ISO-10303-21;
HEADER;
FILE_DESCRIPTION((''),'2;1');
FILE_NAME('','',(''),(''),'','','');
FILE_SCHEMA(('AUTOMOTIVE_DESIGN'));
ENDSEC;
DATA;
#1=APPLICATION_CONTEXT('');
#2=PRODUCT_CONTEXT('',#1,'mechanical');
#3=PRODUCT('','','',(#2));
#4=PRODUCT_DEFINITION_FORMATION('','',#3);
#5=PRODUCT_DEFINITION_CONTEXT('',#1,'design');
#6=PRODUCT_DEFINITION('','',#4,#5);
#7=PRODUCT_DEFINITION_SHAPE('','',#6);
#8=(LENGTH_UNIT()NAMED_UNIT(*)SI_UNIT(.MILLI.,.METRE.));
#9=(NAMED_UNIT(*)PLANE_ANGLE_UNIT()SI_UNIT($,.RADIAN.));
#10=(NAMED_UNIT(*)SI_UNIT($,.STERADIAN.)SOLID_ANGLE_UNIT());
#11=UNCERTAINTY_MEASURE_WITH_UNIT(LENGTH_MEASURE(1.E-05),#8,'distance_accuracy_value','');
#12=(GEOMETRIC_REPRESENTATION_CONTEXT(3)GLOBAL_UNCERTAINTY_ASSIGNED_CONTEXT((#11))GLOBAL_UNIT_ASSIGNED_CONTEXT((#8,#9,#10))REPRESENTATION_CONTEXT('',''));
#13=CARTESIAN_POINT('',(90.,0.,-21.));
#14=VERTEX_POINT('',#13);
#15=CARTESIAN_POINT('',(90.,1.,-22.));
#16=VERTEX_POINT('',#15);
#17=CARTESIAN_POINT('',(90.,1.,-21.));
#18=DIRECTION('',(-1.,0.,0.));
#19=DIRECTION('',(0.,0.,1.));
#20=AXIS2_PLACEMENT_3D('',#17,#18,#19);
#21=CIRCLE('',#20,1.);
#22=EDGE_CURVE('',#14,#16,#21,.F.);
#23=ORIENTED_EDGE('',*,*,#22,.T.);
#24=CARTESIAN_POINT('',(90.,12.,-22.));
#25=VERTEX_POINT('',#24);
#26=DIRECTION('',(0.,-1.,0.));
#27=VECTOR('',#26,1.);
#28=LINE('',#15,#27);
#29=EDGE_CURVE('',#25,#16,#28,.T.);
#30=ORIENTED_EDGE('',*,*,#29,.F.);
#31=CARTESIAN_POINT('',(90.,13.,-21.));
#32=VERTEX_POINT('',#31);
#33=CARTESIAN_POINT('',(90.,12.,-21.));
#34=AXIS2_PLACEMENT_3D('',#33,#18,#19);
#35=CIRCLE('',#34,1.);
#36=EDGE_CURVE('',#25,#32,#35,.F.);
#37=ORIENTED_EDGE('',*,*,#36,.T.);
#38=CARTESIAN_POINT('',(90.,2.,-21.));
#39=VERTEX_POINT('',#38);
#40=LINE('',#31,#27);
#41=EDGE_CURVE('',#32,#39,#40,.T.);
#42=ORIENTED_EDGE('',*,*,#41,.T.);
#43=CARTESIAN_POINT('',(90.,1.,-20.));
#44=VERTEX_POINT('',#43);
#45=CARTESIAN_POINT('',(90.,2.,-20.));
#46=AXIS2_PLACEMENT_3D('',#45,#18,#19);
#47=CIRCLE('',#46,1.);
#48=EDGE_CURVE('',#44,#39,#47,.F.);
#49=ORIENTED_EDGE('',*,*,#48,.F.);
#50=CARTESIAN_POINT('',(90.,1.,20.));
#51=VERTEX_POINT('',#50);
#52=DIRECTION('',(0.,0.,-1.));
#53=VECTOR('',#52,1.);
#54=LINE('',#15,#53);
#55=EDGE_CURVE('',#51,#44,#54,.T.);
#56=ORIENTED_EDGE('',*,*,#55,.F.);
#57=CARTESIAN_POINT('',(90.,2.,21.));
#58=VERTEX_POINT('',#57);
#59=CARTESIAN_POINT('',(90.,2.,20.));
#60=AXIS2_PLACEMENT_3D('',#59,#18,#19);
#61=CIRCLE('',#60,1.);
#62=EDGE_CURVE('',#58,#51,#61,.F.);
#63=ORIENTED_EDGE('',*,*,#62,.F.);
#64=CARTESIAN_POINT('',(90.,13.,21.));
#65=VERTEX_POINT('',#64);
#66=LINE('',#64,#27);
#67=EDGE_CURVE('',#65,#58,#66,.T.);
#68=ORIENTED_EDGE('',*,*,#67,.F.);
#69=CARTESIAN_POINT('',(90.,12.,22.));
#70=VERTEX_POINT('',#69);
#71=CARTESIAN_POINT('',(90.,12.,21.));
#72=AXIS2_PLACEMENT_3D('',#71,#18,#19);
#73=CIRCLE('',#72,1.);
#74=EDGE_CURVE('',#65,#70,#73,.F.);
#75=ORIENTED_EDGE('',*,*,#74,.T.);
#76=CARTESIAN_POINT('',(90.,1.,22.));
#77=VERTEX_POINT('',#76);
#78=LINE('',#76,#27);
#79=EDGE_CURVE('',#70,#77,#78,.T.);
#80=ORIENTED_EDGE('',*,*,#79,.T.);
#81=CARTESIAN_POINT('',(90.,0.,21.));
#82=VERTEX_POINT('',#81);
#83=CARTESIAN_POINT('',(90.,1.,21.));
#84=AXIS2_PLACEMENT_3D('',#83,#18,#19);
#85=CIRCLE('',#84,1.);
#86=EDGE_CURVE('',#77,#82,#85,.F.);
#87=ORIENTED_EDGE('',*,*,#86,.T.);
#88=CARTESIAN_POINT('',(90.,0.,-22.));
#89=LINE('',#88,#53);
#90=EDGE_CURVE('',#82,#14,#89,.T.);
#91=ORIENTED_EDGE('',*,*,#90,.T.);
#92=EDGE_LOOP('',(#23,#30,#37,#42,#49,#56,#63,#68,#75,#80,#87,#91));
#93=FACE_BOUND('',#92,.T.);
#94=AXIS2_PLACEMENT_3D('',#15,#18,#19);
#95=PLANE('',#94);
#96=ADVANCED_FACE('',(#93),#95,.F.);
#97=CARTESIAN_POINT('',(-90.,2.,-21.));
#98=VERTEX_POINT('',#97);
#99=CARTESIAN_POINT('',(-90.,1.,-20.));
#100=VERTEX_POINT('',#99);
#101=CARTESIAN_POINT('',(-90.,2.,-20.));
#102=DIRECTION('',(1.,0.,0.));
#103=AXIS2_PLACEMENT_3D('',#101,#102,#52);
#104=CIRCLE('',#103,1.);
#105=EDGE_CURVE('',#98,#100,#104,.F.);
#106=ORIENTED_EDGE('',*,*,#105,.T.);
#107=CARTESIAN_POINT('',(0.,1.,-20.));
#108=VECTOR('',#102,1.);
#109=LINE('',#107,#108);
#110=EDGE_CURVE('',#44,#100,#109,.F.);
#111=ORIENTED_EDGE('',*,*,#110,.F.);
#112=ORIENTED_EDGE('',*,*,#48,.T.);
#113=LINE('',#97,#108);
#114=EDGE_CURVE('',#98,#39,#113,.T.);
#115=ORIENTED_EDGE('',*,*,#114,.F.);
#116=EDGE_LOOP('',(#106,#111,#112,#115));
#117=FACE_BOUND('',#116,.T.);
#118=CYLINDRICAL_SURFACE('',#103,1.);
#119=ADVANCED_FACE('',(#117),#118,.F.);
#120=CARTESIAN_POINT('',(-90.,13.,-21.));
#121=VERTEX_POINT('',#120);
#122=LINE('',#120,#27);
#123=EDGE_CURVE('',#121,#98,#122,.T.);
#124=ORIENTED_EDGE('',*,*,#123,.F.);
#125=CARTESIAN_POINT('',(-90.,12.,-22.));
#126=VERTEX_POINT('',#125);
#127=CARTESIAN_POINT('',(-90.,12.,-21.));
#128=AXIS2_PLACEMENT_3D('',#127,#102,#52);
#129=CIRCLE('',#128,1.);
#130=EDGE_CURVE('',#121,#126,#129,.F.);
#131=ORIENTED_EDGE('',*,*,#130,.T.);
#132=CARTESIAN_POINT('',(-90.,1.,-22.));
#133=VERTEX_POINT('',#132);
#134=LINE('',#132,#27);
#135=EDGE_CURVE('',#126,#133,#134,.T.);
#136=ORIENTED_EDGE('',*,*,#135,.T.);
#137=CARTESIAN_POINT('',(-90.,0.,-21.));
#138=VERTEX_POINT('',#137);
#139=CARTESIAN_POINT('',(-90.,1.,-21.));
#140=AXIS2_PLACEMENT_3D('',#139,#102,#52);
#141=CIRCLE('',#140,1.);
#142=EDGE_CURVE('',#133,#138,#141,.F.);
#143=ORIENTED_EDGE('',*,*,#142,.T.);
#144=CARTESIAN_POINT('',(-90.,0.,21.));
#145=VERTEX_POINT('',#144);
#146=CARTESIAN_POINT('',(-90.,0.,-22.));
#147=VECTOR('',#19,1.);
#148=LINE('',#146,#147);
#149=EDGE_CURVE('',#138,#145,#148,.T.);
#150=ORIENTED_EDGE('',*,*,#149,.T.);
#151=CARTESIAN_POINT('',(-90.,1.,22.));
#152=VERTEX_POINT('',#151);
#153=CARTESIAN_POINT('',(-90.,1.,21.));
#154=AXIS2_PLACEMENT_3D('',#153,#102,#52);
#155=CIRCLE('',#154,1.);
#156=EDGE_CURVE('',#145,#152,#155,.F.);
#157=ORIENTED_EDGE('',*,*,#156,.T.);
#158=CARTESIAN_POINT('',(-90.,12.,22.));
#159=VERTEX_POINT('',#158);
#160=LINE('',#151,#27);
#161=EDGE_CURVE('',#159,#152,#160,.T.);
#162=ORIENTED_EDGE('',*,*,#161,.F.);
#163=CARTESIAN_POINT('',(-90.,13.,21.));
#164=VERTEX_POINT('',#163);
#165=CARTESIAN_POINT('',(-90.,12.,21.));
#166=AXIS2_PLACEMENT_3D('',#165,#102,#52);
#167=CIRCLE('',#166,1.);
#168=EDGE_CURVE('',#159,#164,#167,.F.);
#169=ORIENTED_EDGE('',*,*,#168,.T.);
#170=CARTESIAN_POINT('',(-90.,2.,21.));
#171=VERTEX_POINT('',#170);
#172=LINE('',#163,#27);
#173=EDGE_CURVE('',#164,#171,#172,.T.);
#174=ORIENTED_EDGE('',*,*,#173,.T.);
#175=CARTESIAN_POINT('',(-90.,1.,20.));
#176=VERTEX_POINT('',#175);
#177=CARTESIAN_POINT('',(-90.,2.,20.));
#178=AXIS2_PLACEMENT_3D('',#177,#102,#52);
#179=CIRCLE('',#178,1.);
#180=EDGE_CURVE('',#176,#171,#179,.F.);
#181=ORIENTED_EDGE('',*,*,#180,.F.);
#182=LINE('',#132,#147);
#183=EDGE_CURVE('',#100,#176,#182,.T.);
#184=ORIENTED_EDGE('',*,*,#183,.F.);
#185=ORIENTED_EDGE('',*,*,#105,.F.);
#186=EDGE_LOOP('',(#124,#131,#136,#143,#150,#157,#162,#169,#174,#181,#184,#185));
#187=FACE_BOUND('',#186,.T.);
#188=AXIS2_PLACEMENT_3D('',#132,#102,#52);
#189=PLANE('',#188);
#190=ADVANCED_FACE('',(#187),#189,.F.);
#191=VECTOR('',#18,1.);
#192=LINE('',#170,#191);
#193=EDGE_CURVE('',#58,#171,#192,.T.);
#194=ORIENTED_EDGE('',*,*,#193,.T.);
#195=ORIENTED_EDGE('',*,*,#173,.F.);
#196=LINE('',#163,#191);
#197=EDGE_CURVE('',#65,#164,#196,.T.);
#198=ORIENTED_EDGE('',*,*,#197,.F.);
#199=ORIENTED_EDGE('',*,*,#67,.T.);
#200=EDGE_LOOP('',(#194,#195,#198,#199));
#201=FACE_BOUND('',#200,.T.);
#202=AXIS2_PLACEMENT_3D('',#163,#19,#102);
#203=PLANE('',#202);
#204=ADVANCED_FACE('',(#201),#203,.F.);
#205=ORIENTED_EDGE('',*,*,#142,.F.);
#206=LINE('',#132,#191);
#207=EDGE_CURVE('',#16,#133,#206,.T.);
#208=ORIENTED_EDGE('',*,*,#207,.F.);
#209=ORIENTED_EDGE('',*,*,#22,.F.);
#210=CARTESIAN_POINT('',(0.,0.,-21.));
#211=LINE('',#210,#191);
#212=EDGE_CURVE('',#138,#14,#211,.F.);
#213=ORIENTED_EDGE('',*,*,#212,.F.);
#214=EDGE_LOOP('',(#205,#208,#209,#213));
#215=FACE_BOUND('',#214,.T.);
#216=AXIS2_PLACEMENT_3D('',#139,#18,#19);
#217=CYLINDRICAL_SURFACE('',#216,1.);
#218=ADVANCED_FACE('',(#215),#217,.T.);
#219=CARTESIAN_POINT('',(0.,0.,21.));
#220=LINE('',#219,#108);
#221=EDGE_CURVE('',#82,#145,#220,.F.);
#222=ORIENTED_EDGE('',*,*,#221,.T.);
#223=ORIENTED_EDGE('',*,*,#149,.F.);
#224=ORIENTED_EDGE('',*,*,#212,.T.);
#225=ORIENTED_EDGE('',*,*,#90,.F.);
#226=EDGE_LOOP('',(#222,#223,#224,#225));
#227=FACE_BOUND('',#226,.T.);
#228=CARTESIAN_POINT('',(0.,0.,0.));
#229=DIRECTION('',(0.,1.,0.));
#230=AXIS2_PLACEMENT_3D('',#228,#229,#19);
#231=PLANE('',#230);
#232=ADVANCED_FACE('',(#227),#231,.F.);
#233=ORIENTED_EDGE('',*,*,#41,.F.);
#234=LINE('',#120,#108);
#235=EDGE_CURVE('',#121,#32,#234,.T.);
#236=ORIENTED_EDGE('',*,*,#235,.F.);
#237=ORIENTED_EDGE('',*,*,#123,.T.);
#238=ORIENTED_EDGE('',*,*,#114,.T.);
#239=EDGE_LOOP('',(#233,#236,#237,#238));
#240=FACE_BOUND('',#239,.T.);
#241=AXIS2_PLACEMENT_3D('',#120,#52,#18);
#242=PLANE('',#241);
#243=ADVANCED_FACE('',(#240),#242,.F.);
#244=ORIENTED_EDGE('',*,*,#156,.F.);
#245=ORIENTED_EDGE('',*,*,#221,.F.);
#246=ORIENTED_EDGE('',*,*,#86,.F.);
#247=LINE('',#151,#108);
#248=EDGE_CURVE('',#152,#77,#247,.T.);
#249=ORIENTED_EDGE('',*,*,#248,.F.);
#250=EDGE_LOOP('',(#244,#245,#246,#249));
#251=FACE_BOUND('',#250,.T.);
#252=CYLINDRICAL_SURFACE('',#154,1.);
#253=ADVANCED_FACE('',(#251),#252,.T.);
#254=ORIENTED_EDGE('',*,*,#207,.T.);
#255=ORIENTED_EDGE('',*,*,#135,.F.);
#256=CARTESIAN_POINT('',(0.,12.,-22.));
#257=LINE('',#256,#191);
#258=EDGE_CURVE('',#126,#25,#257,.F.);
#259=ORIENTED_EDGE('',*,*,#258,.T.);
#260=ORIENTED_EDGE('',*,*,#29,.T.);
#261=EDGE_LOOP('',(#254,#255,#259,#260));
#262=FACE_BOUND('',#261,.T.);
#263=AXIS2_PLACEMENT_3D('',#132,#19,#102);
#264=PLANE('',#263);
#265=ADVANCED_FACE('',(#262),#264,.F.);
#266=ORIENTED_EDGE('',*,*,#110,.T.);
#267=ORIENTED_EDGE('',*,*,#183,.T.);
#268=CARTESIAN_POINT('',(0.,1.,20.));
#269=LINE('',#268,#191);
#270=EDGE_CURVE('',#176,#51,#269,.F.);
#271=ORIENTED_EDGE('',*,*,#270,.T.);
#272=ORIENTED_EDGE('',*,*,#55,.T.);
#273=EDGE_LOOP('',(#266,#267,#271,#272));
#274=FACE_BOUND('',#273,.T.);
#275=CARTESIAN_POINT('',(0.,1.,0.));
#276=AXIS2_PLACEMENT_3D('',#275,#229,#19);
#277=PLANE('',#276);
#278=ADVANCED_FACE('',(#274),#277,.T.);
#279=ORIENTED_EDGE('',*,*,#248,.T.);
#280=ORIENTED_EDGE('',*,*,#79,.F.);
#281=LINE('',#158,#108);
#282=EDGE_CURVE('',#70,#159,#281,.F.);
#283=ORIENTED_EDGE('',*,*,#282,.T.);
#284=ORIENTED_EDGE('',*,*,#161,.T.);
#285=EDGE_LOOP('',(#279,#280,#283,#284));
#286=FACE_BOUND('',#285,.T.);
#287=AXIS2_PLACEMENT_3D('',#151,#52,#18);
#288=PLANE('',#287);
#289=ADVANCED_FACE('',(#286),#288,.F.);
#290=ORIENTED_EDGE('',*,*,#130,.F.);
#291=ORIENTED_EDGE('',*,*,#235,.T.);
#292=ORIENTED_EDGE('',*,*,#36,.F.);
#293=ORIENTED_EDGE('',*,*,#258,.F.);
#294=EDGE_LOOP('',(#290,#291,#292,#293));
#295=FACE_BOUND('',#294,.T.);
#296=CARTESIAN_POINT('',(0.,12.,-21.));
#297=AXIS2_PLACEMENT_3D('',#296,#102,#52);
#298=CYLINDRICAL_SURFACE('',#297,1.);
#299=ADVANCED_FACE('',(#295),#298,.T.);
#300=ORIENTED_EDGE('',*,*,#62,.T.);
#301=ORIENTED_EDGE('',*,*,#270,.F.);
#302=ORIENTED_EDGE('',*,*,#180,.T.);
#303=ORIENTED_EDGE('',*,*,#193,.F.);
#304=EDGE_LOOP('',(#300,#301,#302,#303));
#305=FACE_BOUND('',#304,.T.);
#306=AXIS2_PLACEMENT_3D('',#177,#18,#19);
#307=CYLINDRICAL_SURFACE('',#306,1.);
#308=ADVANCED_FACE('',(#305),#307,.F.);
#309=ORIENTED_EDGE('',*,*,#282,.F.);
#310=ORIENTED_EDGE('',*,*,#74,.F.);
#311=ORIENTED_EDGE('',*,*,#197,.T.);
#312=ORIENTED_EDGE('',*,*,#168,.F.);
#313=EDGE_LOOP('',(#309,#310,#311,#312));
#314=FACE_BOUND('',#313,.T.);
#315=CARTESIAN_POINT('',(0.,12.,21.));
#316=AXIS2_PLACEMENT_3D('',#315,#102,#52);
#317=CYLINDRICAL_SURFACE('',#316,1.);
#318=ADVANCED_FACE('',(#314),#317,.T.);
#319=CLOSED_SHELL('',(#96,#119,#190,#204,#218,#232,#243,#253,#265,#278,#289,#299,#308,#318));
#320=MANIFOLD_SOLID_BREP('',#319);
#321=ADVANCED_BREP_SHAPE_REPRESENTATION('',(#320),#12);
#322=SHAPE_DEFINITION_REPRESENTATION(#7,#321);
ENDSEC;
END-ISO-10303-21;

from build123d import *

# Parameters (mm, degrees)
SKETCH1_W           = 180
SKETCH1_H           = 44
BOSS_EXTRUDE1_DEPTH = 1
SKETCH2_W           = 180
SKETCH2_H           = 1
BOSS_EXTRUDE2_DEPTH = 12
FILLET1_R           = 1
FILLET2_R           = 1
FILLET3_R           = 1
FILLET4_R           = 1
FILLET5_R           = 1
FILLET6_R           = 1


with BuildPart() as part:
    # Sketch1 → Boss-Extrude1 (new body)
    with BuildSketch(Plane(origin=(0, 0, 0), x_dir=(1, 0, 0), z_dir=(0, 1, 0))):
        Rectangle(SKETCH1_W, SKETCH1_H)
    extrude(amount=BOSS_EXTRUDE1_DEPTH)

    # Sketch2 → Boss-Extrude2 (add)
    with BuildSketch(Plane(origin=(0, 1, 0), x_dir=(1, 0, 0), z_dir=(0, 1, 0))):
        with Locations((0, 21.5)):
            Rectangle(SKETCH2_W, SKETCH2_H)
        with Locations((0, -21.5)):
            Rectangle(SKETCH2_W, SKETCH2_H)
    extrude(amount=BOSS_EXTRUDE2_DEPTH)

    # Fillet1
    fillet1_edges = [part.edges().sort_by_distance(p)[0] for p in [
        (0, 13, 22),
    ]]
    fillet(fillet1_edges, radius=FILLET1_R - 0.0001)  # a hair under: the kernel refuses the full size

    # Fillet2
    fillet2_edges = [part.edges().sort_by_distance(p)[0] for p in [
        (0, 13, -22),
    ]]
    fillet(fillet2_edges, radius=FILLET2_R - 0.0001)  # a hair under: the kernel refuses the full size

    # Fillet3
    fillet3_edges = [part.edges().sort_by_distance(p)[0] for p in [
        (0, 1, -21),
    ]]
    fillet(fillet3_edges, radius=FILLET3_R)

    # Fillet4
    fillet4_edges = [part.edges().sort_by_distance(p)[0] for p in [
        (0, 1, 21),
    ]]
    fillet(fillet4_edges, radius=FILLET4_R)

    # Fillet5
    fillet5_edges = [part.edges().sort_by_distance(p)[0] for p in [
        (0, 0, 22),
    ]]
    fillet(fillet5_edges, radius=FILLET5_R)

    # Fillet6
    fillet6_edges = [part.edges().sort_by_distance(p)[0] for p in [
        (0, 0, -22),
    ]]
    fillet(fillet6_edges, radius=FILLET6_R)


solid = part.part
